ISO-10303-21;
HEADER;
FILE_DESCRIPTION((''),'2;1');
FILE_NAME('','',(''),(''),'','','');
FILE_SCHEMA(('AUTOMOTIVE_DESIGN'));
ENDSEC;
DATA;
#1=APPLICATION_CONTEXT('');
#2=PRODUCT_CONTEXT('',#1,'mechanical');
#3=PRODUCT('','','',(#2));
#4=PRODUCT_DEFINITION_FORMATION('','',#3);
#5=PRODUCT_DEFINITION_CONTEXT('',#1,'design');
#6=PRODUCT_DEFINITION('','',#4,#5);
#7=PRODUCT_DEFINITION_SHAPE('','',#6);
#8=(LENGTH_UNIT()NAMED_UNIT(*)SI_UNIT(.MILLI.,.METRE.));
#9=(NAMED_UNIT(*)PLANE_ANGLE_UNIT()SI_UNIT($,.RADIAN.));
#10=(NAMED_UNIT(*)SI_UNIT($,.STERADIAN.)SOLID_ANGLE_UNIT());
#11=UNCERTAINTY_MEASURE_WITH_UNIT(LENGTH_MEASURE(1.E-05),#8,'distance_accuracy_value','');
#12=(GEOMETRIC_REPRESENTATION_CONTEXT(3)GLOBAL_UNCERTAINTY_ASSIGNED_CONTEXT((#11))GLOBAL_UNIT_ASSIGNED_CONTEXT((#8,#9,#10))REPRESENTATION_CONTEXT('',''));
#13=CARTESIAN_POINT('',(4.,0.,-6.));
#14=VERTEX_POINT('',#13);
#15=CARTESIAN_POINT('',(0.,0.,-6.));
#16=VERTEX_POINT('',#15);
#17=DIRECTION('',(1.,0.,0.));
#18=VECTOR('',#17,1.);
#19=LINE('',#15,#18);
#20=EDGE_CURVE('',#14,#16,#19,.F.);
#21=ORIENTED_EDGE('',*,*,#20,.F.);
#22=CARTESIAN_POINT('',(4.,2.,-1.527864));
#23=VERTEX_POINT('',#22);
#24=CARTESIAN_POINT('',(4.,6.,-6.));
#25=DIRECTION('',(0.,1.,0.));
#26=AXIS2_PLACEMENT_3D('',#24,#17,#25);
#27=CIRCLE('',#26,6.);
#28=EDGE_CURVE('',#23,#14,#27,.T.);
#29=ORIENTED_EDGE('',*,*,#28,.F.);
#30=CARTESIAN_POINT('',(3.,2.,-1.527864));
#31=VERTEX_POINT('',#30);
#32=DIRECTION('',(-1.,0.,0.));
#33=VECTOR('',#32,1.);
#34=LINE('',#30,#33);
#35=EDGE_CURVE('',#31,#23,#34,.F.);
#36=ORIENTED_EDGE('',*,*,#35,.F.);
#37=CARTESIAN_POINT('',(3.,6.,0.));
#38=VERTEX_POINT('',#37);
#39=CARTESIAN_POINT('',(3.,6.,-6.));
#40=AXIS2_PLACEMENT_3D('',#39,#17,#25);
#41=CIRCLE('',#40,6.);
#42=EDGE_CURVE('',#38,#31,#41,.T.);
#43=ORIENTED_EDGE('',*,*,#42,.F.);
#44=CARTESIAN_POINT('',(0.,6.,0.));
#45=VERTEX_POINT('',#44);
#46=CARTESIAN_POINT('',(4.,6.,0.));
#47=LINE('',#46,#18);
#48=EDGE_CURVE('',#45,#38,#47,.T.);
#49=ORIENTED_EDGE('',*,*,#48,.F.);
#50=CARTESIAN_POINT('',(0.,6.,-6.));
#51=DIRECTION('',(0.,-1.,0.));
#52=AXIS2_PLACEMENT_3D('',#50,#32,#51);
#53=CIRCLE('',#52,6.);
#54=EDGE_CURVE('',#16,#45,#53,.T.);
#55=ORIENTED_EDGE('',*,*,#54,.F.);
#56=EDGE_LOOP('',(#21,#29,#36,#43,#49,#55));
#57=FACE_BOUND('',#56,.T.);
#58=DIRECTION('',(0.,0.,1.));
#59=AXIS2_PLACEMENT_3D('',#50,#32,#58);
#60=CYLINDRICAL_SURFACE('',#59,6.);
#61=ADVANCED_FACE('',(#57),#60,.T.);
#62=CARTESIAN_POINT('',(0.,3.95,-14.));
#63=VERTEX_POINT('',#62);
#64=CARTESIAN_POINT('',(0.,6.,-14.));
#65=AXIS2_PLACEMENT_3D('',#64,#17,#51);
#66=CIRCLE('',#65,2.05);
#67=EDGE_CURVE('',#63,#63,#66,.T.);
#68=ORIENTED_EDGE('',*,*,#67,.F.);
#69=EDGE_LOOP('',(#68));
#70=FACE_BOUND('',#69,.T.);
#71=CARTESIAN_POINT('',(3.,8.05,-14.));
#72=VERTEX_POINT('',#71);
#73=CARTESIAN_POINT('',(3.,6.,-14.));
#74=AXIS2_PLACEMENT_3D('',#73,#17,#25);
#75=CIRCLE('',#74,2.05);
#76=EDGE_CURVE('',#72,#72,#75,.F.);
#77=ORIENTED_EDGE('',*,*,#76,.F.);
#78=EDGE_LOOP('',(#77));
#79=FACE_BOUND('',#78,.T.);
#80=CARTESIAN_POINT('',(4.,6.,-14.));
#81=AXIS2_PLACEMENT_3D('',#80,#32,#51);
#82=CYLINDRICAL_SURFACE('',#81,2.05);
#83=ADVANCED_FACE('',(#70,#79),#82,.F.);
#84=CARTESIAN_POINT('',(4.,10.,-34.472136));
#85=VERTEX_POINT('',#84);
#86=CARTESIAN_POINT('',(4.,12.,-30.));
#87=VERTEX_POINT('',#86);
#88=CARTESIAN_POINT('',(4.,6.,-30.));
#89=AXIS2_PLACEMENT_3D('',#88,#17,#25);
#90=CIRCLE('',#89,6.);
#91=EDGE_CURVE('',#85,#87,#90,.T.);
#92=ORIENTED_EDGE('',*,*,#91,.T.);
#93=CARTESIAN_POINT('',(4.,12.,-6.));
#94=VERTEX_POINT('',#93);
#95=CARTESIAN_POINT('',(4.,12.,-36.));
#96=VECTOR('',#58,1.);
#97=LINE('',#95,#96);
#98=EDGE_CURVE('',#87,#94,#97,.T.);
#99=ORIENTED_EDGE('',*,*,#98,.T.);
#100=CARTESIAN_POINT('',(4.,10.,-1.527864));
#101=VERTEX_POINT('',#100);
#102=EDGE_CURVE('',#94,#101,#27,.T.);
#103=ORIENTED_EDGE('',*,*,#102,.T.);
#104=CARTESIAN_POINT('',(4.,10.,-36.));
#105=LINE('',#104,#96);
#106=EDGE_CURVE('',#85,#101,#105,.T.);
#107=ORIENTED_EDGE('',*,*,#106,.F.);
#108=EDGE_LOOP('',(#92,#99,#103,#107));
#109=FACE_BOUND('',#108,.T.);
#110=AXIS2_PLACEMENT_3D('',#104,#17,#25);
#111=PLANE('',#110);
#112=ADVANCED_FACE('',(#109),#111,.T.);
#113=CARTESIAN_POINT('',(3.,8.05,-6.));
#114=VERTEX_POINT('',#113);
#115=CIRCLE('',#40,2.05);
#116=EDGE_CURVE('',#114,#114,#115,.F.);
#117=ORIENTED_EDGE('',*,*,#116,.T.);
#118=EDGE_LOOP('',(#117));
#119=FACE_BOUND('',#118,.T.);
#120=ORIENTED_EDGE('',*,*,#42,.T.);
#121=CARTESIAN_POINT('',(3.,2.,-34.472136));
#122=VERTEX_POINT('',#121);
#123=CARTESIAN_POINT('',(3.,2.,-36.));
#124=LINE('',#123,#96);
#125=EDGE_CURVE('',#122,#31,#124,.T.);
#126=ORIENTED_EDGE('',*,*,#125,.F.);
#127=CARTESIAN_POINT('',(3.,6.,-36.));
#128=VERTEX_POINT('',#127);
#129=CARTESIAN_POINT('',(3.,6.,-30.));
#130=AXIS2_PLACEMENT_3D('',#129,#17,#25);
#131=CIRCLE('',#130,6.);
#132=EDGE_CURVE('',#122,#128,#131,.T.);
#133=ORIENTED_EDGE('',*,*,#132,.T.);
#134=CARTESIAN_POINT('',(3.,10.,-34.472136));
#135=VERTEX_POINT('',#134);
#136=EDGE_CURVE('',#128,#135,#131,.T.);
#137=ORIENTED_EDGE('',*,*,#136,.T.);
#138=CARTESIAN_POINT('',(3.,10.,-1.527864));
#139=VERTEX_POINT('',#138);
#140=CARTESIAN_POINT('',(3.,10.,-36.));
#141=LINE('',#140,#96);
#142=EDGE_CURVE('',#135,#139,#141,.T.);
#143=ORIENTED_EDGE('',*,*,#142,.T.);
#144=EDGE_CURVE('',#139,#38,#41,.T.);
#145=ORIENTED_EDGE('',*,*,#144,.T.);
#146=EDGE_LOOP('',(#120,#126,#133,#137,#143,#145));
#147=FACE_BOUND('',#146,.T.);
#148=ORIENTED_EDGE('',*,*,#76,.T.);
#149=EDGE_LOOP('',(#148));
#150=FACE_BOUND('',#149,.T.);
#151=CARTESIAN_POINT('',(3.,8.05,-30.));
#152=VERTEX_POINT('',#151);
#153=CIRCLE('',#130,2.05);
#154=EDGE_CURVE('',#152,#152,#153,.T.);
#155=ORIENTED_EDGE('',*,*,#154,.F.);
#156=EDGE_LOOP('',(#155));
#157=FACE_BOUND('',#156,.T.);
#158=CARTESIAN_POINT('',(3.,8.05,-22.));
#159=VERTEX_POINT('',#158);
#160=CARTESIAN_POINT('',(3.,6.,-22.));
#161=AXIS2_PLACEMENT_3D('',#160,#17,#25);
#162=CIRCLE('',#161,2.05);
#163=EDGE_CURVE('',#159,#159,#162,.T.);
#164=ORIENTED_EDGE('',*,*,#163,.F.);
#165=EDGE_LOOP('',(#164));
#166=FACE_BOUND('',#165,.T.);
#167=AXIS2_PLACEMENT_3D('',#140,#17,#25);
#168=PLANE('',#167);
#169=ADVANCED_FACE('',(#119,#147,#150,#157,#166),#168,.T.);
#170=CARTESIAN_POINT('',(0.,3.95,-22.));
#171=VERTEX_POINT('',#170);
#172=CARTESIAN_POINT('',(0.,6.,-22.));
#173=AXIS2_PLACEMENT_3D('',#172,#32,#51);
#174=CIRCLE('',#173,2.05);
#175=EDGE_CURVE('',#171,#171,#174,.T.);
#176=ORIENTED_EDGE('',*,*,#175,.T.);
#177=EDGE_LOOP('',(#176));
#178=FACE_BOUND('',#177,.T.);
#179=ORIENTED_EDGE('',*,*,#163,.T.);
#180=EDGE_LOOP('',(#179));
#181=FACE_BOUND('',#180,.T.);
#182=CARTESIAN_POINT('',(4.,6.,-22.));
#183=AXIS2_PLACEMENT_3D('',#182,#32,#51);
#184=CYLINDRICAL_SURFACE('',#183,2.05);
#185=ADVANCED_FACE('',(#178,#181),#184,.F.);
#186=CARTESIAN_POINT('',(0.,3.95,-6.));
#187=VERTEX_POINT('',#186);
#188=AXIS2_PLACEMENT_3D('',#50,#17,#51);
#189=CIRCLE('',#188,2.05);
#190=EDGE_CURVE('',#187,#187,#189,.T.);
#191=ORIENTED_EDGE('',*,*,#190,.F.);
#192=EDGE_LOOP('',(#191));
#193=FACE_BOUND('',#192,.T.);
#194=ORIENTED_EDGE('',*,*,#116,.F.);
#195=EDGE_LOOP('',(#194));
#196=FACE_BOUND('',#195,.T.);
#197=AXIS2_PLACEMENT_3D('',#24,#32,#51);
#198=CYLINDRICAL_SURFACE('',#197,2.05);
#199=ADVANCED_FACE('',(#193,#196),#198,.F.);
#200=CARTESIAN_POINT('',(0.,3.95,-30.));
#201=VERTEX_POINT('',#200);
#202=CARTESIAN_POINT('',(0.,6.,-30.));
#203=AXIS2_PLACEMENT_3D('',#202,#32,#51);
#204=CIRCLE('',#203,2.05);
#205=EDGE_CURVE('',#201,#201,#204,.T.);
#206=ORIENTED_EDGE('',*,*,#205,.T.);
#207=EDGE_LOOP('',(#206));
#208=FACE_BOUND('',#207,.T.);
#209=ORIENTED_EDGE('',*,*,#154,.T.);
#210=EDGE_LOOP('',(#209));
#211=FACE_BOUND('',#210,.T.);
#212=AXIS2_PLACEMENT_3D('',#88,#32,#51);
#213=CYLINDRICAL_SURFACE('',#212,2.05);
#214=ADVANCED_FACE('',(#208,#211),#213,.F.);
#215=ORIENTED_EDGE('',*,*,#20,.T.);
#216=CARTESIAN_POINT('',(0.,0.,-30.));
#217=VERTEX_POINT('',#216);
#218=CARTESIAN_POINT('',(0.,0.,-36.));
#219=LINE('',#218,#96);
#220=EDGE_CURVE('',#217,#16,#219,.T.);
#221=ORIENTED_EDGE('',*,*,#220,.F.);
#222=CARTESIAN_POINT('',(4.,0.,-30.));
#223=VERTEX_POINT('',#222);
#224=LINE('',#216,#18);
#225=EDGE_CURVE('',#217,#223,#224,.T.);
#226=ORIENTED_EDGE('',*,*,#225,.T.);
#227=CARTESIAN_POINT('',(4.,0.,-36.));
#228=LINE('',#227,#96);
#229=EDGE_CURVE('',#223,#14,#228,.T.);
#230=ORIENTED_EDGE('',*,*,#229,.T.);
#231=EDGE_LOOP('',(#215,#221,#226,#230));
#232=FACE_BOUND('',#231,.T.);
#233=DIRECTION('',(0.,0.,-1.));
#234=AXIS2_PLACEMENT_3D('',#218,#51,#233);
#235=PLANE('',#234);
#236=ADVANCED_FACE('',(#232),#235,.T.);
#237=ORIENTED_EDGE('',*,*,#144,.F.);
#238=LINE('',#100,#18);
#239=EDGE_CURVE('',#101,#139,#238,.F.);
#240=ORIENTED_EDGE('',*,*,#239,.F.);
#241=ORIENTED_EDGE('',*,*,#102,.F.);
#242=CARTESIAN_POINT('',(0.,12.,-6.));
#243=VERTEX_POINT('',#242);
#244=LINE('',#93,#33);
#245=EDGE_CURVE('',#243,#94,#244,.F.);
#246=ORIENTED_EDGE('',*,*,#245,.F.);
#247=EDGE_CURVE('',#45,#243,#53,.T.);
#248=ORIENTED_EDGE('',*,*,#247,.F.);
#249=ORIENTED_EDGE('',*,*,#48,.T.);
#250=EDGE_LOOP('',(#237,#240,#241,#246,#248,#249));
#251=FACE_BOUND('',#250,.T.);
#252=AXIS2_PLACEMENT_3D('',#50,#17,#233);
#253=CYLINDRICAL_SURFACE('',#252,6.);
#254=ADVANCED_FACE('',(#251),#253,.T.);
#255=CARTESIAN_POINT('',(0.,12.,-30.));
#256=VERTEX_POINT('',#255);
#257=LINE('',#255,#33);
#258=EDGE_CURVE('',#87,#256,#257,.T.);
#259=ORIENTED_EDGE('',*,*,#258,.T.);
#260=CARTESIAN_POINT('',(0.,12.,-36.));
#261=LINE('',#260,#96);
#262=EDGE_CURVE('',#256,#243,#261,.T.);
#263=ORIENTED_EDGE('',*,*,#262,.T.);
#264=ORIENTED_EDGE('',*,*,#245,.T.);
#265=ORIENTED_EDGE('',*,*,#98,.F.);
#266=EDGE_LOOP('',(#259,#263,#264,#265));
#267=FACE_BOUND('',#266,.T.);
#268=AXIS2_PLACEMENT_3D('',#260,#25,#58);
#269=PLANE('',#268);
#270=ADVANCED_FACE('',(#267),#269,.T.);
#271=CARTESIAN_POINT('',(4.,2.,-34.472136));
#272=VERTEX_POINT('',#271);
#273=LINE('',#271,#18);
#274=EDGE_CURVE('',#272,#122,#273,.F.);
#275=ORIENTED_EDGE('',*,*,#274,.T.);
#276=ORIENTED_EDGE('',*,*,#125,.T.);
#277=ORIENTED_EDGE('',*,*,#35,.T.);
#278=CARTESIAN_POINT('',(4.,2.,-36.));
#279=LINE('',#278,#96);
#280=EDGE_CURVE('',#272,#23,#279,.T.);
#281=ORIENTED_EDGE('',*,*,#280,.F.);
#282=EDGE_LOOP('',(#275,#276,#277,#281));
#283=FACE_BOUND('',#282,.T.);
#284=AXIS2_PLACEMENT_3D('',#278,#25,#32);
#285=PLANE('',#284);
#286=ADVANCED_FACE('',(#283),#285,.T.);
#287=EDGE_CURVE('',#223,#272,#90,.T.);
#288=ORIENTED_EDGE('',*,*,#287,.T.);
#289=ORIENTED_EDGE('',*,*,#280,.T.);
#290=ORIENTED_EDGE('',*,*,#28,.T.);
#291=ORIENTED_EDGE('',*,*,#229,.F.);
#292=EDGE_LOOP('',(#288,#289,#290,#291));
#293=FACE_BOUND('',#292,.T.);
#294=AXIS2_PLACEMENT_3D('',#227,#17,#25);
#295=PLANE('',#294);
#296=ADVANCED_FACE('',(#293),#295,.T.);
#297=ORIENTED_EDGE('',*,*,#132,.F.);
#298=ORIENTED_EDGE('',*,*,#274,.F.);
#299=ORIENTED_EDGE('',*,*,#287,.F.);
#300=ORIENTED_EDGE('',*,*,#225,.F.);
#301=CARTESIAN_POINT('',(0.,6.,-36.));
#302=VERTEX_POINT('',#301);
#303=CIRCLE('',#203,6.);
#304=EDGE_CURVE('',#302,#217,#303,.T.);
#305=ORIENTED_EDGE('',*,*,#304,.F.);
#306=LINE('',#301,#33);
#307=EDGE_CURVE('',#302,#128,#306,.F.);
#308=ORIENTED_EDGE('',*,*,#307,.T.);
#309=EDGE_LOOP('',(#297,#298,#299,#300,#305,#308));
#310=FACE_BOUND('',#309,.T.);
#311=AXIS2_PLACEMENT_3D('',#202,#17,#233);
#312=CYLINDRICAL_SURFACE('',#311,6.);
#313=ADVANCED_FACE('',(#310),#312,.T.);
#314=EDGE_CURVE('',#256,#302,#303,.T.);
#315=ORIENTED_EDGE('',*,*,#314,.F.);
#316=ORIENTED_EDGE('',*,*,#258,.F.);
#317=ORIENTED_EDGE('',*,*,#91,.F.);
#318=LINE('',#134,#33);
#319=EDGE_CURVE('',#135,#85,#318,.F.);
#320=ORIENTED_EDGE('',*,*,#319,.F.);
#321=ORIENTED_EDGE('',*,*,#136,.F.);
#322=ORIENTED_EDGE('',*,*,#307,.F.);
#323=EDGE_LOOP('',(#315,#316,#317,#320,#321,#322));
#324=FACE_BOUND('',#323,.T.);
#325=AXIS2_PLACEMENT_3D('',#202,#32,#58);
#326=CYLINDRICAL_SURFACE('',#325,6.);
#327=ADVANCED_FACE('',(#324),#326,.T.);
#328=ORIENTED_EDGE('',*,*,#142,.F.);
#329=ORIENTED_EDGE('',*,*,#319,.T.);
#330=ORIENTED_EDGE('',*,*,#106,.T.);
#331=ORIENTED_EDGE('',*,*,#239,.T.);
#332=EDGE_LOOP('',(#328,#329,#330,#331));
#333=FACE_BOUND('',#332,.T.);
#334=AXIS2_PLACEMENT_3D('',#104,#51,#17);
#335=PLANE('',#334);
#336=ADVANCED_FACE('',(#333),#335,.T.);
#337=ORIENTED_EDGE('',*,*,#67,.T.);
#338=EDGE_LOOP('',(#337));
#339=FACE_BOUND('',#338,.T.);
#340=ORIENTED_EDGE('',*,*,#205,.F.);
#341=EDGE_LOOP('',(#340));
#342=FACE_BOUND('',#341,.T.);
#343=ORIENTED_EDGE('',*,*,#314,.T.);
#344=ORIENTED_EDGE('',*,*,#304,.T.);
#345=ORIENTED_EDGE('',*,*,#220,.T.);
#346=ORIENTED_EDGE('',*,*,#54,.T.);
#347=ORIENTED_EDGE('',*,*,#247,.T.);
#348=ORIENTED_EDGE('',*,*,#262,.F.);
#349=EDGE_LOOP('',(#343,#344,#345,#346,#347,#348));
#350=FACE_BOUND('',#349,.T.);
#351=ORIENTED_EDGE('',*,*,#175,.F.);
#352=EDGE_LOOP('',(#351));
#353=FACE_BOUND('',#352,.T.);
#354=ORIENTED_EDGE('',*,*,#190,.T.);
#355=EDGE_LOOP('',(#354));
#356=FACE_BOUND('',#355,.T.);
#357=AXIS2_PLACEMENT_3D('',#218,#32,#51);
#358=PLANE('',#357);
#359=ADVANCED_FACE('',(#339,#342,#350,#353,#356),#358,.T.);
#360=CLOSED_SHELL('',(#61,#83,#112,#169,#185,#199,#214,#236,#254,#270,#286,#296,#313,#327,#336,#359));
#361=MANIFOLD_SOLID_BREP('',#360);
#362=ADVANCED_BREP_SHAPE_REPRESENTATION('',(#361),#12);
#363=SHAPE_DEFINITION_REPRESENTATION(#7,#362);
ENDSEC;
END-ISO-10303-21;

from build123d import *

# Parameters (mm, degrees)
BOSS_EXTRUDE1_DEPTH     = 36
FILLET1_R               = 6
SKETCH2_R               = 2.05
CUT_EXTRUDE1_DEPTH      = 39.157568057
LPATTERN1_COUNT         = 2
LPATTERN1_PITCH         = 8
MIRROR1_COPY_1_SKETCH_R = 2.05
MIRROR1_COPY_1_DEPTH    = 39.157568057


with BuildPart() as part:
    # Sketch1 → Boss-Extrude1 (new body)
    with BuildSketch(Plane.XY):
        Polygon((0, 0), (4, 0), (4, 2), (3, 2), (3, 10), (4, 10), (4, 12), (0, 12), align=None)
    extrude(amount=-BOSS_EXTRUDE1_DEPTH)

    # Fillet1
    fillet1_edges = [part.edges().sort_by_distance(p)[0] for p in [
        (2, 12, 0),
        (2, 0, 0),
        (2, 0, -36),
        (2, 12, -36),
    ]]
    fillet(fillet1_edges, radius=FILLET1_R - 0.0001)  # a hair under: the kernel refuses the full size

    # Sketch2 → Cut-Extrude1 (cut, through all)
    with BuildSketch(Plane.ZY):
        with Locations(Location((-30, 6, 0), (0, 0, 270))):
            Circle(SKETCH2_R)
    cut_extrude1 = extrude(amount=-CUT_EXTRUDE1_DEPTH, mode=Mode.SUBTRACT)

    # LPattern1: Cut-Extrude1 ×2
    with Locations(*[(0, 0, i * LPATTERN1_PITCH) for i in range(1, LPATTERN1_COUNT)]):
        add(cut_extrude1, mode=Mode.SUBTRACT)

    # Mirror1: Cut-Extrude1 across plane
    add(cut_extrude1.mirror(Plane.XY.offset(-18)), mode=Mode.SUBTRACT)

    # Mirror1 copy 1 sketch → Mirror1 copy 1 (cut, through all)
    with BuildSketch(Plane(origin=(0, 0, -44), x_dir=(0, 0, -1), z_dir=(-1, 0, 0))):
        with Locations((-30, -6)):
            Circle(MIRROR1_COPY_1_SKETCH_R)
    extrude(amount=-MIRROR1_COPY_1_DEPTH, mode=Mode.SUBTRACT)


solid = part.part
